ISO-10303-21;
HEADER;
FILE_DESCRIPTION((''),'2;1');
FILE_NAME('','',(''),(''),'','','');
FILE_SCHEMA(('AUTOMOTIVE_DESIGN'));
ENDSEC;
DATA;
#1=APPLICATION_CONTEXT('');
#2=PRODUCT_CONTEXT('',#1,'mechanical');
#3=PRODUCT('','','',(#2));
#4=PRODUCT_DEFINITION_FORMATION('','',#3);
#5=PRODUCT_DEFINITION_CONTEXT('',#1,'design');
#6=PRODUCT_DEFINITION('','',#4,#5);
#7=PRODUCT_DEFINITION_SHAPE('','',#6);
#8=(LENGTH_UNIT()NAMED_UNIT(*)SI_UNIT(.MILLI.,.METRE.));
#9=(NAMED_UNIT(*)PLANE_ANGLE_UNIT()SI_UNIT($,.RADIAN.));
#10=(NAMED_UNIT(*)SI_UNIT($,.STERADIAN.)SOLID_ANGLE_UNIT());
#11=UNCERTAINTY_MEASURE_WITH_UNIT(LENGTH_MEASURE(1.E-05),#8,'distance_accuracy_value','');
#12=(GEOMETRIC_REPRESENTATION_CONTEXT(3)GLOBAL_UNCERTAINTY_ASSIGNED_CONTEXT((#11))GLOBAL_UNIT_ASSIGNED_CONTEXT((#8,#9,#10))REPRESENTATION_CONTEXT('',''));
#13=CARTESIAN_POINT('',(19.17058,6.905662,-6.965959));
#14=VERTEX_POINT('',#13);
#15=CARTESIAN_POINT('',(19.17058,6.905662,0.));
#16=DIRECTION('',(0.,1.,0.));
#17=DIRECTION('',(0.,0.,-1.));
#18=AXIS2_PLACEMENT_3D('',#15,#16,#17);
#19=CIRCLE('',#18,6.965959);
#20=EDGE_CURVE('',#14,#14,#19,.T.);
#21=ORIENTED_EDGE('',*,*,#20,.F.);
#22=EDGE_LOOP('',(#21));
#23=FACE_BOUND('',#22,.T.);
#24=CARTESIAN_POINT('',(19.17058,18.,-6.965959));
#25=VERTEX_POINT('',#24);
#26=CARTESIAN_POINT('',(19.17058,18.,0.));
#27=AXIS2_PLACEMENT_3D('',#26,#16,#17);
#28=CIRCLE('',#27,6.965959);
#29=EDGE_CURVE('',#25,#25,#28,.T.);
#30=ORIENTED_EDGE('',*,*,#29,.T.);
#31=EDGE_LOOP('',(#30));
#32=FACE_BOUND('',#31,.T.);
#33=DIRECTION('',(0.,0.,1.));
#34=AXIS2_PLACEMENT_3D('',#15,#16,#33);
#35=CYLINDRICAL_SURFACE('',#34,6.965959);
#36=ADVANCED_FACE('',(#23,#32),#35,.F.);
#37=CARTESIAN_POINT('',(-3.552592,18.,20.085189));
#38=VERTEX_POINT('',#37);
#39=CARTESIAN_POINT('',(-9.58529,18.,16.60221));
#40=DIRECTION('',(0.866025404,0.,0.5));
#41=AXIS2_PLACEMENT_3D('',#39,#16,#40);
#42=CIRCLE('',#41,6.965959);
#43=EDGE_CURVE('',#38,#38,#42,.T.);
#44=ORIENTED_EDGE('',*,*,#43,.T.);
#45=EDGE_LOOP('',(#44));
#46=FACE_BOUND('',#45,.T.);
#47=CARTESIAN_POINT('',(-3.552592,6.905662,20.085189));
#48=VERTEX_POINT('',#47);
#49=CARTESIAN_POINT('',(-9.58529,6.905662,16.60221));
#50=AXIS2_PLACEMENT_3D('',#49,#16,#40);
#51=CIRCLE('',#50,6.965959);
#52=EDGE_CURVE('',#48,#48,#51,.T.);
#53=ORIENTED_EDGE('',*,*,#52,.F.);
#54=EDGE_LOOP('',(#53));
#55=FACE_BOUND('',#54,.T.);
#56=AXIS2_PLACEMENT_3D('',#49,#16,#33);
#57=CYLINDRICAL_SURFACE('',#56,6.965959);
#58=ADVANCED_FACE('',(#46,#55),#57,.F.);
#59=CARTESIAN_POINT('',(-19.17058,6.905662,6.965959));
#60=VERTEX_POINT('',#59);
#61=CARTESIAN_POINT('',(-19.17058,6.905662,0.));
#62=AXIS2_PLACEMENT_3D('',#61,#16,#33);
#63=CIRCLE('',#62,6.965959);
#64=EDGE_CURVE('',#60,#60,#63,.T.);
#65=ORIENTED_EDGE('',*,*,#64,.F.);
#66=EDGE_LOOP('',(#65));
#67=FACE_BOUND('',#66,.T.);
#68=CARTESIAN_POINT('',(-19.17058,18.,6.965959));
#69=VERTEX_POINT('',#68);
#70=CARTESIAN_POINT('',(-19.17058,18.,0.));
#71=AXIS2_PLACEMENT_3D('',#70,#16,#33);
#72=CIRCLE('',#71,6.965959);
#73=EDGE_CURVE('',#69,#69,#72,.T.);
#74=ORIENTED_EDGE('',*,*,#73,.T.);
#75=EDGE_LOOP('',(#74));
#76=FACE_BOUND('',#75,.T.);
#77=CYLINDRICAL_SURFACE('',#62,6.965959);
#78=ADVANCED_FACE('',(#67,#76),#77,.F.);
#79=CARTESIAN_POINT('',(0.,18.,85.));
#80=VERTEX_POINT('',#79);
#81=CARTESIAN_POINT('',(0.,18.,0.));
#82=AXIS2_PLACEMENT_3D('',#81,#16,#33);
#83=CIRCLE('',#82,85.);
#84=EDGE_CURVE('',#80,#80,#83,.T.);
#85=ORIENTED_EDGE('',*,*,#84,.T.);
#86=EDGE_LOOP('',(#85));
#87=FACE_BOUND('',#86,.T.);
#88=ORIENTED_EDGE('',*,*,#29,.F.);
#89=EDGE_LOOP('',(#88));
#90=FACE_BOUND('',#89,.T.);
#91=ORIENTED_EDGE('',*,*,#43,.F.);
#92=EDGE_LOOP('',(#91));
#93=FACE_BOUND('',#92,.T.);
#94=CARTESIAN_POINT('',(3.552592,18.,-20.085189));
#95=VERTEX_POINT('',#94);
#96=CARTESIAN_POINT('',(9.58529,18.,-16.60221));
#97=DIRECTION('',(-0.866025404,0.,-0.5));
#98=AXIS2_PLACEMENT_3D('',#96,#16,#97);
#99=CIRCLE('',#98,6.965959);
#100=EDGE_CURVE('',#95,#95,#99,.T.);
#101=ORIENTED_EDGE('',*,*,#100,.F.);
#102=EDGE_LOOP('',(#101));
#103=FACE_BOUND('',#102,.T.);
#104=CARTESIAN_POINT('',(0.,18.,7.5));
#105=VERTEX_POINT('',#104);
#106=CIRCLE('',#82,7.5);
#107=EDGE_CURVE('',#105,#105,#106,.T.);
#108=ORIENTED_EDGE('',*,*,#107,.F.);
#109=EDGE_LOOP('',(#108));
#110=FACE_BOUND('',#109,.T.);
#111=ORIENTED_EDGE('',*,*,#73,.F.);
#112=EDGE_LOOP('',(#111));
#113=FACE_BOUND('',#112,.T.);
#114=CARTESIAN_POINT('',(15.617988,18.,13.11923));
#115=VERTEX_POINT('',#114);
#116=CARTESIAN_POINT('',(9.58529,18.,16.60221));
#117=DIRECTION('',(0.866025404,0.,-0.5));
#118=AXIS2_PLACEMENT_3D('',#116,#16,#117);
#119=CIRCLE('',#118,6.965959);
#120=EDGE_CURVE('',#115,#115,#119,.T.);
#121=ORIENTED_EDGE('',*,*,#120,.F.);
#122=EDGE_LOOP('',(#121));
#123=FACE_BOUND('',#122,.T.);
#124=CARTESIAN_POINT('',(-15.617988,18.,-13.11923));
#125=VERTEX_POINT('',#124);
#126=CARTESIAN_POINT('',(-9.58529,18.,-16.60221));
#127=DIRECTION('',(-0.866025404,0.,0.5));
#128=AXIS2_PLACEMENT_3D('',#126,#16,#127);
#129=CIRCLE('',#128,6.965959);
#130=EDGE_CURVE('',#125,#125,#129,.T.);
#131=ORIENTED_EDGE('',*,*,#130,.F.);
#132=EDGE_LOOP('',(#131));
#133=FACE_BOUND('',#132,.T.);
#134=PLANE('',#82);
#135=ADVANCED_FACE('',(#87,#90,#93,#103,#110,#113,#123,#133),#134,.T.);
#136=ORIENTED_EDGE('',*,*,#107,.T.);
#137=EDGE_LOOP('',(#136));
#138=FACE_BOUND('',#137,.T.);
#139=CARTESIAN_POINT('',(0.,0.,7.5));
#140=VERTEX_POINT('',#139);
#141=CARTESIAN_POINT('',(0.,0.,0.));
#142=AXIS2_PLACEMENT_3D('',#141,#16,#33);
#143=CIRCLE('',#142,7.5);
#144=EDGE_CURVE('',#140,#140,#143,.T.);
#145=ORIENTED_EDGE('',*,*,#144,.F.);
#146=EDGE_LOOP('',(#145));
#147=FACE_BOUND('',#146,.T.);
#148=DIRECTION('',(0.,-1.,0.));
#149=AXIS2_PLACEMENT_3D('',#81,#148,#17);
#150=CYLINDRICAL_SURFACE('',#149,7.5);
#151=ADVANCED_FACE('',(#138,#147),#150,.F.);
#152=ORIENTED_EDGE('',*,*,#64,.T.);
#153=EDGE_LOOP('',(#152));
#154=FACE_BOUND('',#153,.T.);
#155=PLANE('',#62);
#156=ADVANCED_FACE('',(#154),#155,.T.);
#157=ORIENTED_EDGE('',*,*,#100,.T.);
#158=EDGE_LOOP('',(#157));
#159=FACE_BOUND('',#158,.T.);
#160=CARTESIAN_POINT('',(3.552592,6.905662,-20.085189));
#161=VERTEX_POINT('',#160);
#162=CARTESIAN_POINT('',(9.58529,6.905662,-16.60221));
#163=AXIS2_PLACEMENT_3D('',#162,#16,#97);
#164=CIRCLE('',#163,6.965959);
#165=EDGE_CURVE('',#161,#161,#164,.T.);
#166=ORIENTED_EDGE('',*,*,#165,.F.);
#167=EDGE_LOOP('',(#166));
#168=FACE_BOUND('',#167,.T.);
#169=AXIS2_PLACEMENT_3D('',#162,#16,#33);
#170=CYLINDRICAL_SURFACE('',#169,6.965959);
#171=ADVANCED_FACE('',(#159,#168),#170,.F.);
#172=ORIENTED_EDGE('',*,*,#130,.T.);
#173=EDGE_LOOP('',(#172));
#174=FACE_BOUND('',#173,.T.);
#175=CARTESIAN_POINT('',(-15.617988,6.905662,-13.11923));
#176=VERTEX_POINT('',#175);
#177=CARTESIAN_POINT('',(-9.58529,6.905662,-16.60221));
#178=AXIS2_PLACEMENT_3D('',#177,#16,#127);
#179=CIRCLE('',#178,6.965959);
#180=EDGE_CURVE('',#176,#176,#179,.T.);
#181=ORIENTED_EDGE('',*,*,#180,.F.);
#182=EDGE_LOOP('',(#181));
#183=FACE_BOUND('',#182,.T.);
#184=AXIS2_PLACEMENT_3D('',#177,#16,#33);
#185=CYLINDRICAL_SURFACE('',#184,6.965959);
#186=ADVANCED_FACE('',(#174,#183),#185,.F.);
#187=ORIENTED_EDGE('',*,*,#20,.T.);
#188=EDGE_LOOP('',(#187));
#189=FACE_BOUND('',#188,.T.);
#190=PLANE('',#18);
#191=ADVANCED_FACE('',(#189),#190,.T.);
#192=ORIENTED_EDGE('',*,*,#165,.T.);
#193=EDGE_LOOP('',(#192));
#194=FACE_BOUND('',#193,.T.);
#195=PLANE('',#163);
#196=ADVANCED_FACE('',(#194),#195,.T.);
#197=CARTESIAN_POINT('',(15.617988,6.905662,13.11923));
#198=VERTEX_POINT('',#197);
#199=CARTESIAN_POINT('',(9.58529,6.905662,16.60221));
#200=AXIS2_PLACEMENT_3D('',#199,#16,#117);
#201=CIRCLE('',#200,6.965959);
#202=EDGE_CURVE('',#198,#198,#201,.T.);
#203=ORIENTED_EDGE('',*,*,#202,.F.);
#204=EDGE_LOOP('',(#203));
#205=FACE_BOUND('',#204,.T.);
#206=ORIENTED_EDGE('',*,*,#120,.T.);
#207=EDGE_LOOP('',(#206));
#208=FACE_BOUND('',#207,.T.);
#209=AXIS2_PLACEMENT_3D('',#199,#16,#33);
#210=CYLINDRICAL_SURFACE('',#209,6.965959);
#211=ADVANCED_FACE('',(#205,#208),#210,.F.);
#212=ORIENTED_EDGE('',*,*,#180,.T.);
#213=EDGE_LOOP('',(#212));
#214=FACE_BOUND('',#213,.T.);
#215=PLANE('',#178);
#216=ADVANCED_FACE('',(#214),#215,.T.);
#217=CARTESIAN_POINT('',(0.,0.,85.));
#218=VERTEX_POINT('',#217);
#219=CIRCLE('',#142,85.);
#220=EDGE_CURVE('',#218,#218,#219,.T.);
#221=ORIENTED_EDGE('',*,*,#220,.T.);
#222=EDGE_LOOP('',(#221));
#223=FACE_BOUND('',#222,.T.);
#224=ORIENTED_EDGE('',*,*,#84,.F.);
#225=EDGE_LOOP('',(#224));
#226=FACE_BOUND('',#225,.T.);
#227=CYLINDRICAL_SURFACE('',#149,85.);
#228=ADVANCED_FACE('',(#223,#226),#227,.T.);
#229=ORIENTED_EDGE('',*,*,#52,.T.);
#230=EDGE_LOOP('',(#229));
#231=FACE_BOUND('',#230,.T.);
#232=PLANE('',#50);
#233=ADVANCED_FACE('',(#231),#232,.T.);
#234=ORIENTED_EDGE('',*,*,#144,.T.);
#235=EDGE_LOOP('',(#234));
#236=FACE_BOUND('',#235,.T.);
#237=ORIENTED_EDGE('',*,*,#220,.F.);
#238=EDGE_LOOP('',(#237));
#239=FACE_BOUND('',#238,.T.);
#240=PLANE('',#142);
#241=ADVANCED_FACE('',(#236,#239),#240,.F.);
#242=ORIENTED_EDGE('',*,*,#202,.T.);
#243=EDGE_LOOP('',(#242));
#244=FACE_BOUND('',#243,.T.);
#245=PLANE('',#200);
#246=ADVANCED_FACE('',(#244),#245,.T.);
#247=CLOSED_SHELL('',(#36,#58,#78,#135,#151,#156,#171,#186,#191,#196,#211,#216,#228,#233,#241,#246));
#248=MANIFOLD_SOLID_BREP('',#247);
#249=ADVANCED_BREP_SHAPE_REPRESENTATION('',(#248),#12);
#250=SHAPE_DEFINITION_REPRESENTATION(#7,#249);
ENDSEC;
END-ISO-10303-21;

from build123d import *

# Parameters (mm, degrees)
SKETCH1_R           = 85
BOSS_EXTRUDE1_DEPTH = 18
SKETCH2_R           = 7.5
CUT_EXTRUDE1_DEPTH  = 122.548344291
SKETCH3_R           = 6.965959256
CUT_EXTRUDE2_DEPTH  = 11.094337504
CIRPATTERN1_COUNT   = 6


with BuildPart() as part:
    # Sketch1 → Boss-Extrude1 (new body)
    with BuildSketch(Plane(origin=(0, 0, 0), x_dir=(1, 0, 0), z_dir=(0, 1, 0))):
        Circle(SKETCH1_R)
    extrude(amount=BOSS_EXTRUDE1_DEPTH)

    # Sketch2 → Cut-Extrude1 (cut, through all)
    with BuildSketch(Plane(origin=(0, 0, 0), x_dir=(1, 0, 0), z_dir=(0, 1, 0))):
        Circle(SKETCH2_R)
    extrude(amount=CUT_EXTRUDE1_DEPTH, mode=Mode.SUBTRACT)

    # Sketch3 → Cut-Extrude2 (cut)
    with BuildSketch(Plane(origin=(0, 18, 0), x_dir=(1, 0, 0), z_dir=(0, 1, 0))):
        with Locations((-19.170580293, 0)):
            Circle(SKETCH3_R)
    cut_extrude2 = extrude(amount=-CUT_EXTRUDE2_DEPTH, mode=Mode.SUBTRACT)

    # CirPattern1: Cut-Extrude2 ×6 about axis
    cirpattern1_axis = Axis((0, 0, 0), (0, 1, 0))
    for i in range(1, CIRPATTERN1_COUNT):
        add(cut_extrude2.rotate(cirpattern1_axis, i * 360 / CIRPATTERN1_COUNT), mode=Mode.SUBTRACT)


solid = part.part
